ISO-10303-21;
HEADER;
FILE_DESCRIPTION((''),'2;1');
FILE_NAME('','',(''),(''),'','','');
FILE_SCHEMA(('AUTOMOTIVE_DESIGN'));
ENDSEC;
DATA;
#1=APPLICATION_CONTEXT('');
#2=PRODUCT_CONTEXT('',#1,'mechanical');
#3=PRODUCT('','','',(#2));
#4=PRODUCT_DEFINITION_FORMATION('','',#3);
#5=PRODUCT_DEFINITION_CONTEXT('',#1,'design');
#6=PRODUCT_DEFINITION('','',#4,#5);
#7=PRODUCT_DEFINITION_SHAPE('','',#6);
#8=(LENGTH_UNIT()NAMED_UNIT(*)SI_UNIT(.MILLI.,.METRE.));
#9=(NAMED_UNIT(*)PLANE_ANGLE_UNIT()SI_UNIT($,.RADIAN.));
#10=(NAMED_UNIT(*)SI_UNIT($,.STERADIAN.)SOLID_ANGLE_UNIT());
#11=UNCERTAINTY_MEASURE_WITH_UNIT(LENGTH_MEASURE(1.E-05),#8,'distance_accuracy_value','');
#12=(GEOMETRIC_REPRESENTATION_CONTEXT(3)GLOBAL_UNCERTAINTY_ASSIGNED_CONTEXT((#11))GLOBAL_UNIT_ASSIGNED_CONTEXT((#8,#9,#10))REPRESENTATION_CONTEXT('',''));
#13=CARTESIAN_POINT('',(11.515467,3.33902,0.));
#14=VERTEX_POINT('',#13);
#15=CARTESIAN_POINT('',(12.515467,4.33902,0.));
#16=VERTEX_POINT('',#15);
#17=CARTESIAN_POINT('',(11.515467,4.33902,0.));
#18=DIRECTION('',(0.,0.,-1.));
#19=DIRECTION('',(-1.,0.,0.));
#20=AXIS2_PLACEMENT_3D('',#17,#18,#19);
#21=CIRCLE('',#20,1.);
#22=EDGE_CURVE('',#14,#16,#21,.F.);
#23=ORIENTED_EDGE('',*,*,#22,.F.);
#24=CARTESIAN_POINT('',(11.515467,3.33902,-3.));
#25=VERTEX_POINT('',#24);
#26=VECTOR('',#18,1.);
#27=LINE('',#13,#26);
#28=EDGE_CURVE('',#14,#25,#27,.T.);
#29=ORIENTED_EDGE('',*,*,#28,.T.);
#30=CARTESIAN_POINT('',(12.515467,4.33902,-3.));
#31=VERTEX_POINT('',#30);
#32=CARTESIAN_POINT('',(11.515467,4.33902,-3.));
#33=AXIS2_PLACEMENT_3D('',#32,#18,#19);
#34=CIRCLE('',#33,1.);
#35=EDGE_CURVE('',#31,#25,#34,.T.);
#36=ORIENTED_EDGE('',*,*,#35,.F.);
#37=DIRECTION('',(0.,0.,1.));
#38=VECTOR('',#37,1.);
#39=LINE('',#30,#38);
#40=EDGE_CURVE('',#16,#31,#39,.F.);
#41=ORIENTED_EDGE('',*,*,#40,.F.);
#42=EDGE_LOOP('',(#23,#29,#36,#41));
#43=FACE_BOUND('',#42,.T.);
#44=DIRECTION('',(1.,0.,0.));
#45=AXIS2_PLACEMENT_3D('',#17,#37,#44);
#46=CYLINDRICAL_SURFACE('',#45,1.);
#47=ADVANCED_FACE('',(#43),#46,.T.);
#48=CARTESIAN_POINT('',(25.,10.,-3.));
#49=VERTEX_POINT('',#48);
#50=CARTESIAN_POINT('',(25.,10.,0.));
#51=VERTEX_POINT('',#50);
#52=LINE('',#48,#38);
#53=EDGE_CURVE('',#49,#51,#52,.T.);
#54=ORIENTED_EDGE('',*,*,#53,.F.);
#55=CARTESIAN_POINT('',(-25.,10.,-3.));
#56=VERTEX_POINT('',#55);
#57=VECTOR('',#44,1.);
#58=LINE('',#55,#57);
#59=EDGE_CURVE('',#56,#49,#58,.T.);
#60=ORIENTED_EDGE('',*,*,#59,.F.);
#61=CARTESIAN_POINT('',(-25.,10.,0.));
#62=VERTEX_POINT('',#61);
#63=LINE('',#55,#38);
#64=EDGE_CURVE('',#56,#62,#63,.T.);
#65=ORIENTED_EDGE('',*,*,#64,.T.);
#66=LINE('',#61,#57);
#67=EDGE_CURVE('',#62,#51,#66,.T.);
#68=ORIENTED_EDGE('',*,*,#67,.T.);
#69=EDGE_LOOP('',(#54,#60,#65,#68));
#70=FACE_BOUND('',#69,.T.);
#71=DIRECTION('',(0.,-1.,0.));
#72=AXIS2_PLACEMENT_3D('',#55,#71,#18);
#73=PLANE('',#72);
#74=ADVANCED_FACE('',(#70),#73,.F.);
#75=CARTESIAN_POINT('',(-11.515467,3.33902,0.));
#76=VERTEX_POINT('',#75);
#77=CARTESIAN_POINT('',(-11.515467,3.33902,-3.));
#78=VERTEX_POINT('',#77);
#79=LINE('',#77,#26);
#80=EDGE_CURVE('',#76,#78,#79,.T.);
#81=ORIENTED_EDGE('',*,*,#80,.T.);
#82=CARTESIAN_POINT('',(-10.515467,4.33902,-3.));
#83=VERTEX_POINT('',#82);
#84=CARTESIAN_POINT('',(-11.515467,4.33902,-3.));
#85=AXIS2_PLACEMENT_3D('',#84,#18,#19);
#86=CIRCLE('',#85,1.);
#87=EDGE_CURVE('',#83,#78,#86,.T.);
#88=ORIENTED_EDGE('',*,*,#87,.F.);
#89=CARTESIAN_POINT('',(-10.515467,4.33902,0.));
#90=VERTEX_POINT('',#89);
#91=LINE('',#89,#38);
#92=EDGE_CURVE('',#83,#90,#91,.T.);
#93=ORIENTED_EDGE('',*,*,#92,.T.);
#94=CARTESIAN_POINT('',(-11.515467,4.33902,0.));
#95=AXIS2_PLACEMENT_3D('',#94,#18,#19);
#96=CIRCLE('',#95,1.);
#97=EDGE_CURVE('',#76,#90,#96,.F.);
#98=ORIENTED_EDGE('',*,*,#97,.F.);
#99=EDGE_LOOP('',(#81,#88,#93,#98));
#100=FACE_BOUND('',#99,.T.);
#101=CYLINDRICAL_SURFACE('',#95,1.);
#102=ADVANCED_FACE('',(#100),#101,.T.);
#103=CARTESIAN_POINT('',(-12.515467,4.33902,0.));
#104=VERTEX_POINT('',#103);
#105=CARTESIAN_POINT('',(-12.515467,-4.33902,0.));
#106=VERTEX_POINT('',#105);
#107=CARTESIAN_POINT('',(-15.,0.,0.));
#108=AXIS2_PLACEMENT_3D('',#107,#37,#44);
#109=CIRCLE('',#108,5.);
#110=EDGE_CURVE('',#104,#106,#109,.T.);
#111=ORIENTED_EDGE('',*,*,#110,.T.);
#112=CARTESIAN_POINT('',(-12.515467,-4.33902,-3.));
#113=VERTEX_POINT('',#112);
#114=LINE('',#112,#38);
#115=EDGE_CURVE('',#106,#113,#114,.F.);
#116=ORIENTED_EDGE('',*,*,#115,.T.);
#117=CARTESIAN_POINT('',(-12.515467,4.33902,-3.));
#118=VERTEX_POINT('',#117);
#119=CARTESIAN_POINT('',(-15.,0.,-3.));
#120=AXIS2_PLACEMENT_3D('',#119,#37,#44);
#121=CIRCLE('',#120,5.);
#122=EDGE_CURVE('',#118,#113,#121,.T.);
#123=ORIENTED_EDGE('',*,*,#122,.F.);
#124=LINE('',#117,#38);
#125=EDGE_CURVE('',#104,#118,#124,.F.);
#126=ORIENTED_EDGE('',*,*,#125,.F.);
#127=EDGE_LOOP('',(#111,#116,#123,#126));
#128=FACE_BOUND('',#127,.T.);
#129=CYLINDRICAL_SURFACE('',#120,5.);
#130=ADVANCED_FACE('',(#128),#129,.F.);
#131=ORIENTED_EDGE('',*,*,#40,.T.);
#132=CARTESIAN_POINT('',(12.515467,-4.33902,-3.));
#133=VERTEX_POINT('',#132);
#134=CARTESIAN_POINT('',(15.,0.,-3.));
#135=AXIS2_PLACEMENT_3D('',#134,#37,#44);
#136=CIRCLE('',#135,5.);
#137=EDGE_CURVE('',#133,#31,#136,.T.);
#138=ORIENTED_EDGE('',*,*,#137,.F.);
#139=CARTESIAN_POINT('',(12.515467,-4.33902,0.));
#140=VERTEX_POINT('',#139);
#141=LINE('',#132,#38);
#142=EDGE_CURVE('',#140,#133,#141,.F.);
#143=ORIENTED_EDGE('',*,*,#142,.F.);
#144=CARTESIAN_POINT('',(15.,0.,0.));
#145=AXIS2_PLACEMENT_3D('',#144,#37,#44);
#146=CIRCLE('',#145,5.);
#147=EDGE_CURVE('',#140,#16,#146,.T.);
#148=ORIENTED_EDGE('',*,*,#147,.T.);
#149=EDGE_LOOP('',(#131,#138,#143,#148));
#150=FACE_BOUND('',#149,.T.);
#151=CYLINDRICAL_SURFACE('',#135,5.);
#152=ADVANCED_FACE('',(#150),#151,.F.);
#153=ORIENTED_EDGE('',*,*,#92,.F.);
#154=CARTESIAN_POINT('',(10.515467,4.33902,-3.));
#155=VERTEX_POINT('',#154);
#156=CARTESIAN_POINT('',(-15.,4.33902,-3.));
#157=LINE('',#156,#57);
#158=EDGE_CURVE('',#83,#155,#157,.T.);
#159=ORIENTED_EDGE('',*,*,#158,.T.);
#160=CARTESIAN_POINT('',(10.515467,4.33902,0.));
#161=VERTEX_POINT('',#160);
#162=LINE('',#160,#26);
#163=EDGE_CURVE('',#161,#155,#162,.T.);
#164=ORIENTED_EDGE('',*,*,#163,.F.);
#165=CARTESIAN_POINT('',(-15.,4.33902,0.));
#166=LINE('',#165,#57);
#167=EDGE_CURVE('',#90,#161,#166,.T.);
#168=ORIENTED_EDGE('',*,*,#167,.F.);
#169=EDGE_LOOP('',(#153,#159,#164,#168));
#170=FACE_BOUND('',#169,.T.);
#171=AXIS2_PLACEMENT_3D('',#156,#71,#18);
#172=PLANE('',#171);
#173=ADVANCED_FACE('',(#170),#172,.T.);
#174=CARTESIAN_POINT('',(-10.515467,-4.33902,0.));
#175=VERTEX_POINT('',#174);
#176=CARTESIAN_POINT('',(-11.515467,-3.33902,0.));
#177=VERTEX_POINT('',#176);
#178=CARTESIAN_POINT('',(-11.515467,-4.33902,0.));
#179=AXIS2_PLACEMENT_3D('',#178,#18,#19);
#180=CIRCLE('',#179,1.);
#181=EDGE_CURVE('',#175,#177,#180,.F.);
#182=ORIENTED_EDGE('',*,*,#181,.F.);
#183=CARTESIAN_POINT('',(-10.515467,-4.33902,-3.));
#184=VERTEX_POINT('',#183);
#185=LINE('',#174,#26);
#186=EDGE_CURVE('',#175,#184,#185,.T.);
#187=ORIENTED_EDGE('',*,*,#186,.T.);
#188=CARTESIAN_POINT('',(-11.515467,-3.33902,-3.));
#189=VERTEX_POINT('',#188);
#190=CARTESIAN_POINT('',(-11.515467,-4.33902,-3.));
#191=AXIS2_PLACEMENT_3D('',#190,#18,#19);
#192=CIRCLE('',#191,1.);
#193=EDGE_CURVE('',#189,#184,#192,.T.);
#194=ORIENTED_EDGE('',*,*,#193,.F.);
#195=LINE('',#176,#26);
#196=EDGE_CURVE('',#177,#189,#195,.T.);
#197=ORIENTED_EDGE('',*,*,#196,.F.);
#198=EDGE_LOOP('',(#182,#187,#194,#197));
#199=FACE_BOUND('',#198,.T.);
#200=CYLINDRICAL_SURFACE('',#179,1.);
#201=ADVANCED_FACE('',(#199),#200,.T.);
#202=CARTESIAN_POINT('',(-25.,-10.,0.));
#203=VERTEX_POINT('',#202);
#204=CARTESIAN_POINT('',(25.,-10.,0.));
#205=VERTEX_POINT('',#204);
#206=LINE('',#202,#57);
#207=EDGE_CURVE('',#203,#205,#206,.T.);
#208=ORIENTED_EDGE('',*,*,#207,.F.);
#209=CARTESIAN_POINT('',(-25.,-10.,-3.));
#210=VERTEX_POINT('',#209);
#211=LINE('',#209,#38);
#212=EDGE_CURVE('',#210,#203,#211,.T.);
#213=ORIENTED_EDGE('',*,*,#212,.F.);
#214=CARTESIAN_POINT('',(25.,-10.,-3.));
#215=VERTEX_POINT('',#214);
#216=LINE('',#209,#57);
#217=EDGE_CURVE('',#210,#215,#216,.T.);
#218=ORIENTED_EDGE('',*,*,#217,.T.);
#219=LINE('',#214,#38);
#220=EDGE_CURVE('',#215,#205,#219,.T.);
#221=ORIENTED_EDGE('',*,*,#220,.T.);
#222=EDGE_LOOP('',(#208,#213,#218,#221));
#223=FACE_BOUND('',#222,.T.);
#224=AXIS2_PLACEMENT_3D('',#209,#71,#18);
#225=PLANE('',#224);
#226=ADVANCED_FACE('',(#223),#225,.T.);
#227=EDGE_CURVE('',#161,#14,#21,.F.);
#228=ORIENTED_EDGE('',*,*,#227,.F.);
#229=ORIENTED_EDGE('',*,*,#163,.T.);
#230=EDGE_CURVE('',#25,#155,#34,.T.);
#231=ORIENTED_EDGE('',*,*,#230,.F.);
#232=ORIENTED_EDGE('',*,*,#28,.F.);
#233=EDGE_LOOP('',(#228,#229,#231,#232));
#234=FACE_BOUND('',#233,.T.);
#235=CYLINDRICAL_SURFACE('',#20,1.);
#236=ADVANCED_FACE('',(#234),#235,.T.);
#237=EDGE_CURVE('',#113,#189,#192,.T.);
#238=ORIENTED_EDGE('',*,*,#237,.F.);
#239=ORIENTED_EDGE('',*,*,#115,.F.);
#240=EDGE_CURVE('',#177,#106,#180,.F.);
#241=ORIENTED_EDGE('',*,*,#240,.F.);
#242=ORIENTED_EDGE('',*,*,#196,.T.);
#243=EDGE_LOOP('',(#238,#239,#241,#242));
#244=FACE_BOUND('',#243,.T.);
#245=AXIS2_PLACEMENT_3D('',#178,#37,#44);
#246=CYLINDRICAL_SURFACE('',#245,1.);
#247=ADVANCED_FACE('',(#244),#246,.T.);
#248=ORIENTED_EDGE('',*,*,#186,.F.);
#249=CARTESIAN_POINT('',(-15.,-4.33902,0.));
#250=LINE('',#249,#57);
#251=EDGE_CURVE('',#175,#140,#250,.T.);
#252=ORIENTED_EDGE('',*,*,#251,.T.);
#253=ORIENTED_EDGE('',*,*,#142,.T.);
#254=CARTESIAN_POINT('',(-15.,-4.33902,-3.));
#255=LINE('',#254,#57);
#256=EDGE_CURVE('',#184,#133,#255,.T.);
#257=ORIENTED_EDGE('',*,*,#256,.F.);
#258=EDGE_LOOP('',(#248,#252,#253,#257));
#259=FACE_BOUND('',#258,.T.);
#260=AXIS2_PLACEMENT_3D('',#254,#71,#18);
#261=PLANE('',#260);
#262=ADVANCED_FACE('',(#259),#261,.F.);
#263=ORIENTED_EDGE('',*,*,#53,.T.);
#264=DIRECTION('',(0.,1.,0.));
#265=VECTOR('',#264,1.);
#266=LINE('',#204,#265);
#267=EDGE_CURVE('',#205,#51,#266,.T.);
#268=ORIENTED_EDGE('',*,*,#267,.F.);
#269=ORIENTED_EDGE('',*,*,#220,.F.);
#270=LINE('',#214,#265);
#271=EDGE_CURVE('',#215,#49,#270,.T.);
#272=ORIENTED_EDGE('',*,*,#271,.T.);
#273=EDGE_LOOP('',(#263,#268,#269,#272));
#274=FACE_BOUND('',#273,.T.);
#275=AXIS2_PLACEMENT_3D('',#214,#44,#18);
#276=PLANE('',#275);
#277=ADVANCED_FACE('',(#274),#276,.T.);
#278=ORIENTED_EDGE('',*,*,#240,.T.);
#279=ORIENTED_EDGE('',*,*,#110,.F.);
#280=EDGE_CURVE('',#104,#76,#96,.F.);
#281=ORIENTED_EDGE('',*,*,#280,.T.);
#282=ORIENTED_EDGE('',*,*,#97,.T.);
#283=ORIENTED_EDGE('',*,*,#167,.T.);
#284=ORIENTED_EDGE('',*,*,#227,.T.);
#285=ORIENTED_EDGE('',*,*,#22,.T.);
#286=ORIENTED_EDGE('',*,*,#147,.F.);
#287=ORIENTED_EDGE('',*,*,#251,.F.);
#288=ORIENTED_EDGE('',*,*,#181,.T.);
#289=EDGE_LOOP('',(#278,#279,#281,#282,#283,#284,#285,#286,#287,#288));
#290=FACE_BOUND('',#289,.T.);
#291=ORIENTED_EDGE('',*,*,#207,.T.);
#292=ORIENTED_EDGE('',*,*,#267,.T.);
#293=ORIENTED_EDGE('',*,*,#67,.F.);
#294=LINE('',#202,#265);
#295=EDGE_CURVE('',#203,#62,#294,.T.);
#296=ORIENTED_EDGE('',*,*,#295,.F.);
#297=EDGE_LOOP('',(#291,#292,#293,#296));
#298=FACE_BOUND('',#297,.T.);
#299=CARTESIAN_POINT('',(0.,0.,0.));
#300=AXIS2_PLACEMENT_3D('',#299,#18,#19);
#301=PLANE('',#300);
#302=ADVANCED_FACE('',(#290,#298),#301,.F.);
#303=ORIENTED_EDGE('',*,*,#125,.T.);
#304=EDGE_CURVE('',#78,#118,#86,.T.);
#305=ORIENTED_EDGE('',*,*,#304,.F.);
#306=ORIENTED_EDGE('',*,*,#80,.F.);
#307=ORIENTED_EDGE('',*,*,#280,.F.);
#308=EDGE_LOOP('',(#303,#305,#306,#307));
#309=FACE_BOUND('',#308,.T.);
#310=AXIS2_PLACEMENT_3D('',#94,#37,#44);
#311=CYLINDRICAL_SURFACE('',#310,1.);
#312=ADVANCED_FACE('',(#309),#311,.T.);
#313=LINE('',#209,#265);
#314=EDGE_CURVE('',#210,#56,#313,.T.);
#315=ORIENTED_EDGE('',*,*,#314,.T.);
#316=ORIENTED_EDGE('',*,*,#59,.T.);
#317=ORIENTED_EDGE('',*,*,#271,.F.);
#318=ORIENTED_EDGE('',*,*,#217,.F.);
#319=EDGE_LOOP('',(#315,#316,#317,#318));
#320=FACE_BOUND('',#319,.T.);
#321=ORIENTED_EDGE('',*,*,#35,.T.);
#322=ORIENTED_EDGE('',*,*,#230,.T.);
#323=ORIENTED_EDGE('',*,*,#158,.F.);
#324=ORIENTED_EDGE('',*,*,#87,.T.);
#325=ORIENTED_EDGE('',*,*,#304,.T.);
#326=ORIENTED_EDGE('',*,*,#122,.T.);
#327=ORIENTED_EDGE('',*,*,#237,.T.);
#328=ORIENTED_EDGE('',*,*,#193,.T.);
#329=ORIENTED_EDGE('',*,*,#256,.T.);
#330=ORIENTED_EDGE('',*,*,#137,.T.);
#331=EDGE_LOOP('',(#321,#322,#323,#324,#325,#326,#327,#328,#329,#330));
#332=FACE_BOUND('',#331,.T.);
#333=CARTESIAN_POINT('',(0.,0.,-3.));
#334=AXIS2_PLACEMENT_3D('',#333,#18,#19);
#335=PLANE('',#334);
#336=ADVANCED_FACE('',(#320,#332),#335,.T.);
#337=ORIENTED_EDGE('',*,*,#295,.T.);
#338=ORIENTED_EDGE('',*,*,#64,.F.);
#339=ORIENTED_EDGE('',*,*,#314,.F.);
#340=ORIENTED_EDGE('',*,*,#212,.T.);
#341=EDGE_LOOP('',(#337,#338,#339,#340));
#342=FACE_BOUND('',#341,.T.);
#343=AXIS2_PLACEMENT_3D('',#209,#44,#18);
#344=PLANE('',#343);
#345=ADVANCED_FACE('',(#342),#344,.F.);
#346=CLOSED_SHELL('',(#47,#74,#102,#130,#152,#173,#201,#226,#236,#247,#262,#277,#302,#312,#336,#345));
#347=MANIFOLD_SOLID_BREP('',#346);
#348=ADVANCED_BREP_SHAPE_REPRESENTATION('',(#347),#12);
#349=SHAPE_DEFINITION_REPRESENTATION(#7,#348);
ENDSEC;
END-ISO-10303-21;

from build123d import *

# Parameters (mm, degrees)
SKETCH_1_W          = 50
SKETCH_1_H          = 20
EXTRUDE_1_DEPTH     = 3
SKETCH_3_R          = 5
SKETCH_3_W          = 30
SKETCH_3_H          = 8.678040074
CUT_EXTRUDE_1_DEPTH = 3
SKETCH_4_W          = 2
SKETCH_4_H          = 3
EXTRUDE_2_DEPTH     = 1
FILLET_1_R          = 1
SKETCH_5_W          = 2
SKETCH_5_H          = 3
EXTRUDE_3_DEPTH     = 1
FILLET_2_R          = 1


with BuildPart() as part:
    # 스케치1 → 보스-돌출1 (new body)
    with BuildSketch(Plane.XY):
        Rectangle(SKETCH_1_W, SKETCH_1_H)
    extrude(amount=-EXTRUDE_1_DEPTH)

    # 스케치3 → 컷-돌출1 (cut)
    with BuildSketch(Plane.XY):
        with Locations((-15, 0)):
            Circle(SKETCH_3_R)
        with Locations((15, 0)):
            Circle(SKETCH_3_R)
        Rectangle(SKETCH_3_W, SKETCH_3_H)
    extrude(amount=-CUT_EXTRUDE_1_DEPTH, mode=Mode.SUBTRACT)

    # 스케치4 → 보스-돌출2 (add)
    with BuildSketch(Plane.XZ.offset(-4.339020037)):
        with Locations((-11.515466821, -1.5)):
            Rectangle(SKETCH_4_W, SKETCH_4_H)
        with Locations((11.515466821, -1.5)):
            Rectangle(SKETCH_4_W, SKETCH_4_H)
    extrude(amount=EXTRUDE_2_DEPTH)

    # 필렛1
    fillet_1_edges = [part.edges().sort_by_distance(p)[0] for p in [
        (12.515466821, 3.339020037, -1.5),
        (10.515466821, 3.339020037, -1.5),
        (-10.515466821, 3.339020037, -1.5),
        (-12.515466821, 3.339020037, -1.5),
    ]]
    fillet(fillet_1_edges, radius=FILLET_1_R - 0.0001)  # a hair under: the kernel refuses the full size

    # 스케치5 → 보스-돌출3 (add)
    with BuildSketch(Plane(origin=(0, -4.339020037, 0), x_dir=(1, 0, 0), z_dir=(0, 1, 0))):
        with Locations((-11.515466821, 1.5)):
            Rectangle(SKETCH_5_W, SKETCH_5_H)
    extrude(amount=EXTRUDE_3_DEPTH)

    # 필렛2
    fillet_2_edges = [part.edges().sort_by_distance(p)[0] for p in [
        (-12.515466821, -3.339020037, -1.5),
        (-10.515466821, -3.339020037, -1.5),
    ]]
    fillet(fillet_2_edges, radius=FILLET_2_R - 0.0001)  # a hair under: the kernel refuses the full size


solid = part.part
